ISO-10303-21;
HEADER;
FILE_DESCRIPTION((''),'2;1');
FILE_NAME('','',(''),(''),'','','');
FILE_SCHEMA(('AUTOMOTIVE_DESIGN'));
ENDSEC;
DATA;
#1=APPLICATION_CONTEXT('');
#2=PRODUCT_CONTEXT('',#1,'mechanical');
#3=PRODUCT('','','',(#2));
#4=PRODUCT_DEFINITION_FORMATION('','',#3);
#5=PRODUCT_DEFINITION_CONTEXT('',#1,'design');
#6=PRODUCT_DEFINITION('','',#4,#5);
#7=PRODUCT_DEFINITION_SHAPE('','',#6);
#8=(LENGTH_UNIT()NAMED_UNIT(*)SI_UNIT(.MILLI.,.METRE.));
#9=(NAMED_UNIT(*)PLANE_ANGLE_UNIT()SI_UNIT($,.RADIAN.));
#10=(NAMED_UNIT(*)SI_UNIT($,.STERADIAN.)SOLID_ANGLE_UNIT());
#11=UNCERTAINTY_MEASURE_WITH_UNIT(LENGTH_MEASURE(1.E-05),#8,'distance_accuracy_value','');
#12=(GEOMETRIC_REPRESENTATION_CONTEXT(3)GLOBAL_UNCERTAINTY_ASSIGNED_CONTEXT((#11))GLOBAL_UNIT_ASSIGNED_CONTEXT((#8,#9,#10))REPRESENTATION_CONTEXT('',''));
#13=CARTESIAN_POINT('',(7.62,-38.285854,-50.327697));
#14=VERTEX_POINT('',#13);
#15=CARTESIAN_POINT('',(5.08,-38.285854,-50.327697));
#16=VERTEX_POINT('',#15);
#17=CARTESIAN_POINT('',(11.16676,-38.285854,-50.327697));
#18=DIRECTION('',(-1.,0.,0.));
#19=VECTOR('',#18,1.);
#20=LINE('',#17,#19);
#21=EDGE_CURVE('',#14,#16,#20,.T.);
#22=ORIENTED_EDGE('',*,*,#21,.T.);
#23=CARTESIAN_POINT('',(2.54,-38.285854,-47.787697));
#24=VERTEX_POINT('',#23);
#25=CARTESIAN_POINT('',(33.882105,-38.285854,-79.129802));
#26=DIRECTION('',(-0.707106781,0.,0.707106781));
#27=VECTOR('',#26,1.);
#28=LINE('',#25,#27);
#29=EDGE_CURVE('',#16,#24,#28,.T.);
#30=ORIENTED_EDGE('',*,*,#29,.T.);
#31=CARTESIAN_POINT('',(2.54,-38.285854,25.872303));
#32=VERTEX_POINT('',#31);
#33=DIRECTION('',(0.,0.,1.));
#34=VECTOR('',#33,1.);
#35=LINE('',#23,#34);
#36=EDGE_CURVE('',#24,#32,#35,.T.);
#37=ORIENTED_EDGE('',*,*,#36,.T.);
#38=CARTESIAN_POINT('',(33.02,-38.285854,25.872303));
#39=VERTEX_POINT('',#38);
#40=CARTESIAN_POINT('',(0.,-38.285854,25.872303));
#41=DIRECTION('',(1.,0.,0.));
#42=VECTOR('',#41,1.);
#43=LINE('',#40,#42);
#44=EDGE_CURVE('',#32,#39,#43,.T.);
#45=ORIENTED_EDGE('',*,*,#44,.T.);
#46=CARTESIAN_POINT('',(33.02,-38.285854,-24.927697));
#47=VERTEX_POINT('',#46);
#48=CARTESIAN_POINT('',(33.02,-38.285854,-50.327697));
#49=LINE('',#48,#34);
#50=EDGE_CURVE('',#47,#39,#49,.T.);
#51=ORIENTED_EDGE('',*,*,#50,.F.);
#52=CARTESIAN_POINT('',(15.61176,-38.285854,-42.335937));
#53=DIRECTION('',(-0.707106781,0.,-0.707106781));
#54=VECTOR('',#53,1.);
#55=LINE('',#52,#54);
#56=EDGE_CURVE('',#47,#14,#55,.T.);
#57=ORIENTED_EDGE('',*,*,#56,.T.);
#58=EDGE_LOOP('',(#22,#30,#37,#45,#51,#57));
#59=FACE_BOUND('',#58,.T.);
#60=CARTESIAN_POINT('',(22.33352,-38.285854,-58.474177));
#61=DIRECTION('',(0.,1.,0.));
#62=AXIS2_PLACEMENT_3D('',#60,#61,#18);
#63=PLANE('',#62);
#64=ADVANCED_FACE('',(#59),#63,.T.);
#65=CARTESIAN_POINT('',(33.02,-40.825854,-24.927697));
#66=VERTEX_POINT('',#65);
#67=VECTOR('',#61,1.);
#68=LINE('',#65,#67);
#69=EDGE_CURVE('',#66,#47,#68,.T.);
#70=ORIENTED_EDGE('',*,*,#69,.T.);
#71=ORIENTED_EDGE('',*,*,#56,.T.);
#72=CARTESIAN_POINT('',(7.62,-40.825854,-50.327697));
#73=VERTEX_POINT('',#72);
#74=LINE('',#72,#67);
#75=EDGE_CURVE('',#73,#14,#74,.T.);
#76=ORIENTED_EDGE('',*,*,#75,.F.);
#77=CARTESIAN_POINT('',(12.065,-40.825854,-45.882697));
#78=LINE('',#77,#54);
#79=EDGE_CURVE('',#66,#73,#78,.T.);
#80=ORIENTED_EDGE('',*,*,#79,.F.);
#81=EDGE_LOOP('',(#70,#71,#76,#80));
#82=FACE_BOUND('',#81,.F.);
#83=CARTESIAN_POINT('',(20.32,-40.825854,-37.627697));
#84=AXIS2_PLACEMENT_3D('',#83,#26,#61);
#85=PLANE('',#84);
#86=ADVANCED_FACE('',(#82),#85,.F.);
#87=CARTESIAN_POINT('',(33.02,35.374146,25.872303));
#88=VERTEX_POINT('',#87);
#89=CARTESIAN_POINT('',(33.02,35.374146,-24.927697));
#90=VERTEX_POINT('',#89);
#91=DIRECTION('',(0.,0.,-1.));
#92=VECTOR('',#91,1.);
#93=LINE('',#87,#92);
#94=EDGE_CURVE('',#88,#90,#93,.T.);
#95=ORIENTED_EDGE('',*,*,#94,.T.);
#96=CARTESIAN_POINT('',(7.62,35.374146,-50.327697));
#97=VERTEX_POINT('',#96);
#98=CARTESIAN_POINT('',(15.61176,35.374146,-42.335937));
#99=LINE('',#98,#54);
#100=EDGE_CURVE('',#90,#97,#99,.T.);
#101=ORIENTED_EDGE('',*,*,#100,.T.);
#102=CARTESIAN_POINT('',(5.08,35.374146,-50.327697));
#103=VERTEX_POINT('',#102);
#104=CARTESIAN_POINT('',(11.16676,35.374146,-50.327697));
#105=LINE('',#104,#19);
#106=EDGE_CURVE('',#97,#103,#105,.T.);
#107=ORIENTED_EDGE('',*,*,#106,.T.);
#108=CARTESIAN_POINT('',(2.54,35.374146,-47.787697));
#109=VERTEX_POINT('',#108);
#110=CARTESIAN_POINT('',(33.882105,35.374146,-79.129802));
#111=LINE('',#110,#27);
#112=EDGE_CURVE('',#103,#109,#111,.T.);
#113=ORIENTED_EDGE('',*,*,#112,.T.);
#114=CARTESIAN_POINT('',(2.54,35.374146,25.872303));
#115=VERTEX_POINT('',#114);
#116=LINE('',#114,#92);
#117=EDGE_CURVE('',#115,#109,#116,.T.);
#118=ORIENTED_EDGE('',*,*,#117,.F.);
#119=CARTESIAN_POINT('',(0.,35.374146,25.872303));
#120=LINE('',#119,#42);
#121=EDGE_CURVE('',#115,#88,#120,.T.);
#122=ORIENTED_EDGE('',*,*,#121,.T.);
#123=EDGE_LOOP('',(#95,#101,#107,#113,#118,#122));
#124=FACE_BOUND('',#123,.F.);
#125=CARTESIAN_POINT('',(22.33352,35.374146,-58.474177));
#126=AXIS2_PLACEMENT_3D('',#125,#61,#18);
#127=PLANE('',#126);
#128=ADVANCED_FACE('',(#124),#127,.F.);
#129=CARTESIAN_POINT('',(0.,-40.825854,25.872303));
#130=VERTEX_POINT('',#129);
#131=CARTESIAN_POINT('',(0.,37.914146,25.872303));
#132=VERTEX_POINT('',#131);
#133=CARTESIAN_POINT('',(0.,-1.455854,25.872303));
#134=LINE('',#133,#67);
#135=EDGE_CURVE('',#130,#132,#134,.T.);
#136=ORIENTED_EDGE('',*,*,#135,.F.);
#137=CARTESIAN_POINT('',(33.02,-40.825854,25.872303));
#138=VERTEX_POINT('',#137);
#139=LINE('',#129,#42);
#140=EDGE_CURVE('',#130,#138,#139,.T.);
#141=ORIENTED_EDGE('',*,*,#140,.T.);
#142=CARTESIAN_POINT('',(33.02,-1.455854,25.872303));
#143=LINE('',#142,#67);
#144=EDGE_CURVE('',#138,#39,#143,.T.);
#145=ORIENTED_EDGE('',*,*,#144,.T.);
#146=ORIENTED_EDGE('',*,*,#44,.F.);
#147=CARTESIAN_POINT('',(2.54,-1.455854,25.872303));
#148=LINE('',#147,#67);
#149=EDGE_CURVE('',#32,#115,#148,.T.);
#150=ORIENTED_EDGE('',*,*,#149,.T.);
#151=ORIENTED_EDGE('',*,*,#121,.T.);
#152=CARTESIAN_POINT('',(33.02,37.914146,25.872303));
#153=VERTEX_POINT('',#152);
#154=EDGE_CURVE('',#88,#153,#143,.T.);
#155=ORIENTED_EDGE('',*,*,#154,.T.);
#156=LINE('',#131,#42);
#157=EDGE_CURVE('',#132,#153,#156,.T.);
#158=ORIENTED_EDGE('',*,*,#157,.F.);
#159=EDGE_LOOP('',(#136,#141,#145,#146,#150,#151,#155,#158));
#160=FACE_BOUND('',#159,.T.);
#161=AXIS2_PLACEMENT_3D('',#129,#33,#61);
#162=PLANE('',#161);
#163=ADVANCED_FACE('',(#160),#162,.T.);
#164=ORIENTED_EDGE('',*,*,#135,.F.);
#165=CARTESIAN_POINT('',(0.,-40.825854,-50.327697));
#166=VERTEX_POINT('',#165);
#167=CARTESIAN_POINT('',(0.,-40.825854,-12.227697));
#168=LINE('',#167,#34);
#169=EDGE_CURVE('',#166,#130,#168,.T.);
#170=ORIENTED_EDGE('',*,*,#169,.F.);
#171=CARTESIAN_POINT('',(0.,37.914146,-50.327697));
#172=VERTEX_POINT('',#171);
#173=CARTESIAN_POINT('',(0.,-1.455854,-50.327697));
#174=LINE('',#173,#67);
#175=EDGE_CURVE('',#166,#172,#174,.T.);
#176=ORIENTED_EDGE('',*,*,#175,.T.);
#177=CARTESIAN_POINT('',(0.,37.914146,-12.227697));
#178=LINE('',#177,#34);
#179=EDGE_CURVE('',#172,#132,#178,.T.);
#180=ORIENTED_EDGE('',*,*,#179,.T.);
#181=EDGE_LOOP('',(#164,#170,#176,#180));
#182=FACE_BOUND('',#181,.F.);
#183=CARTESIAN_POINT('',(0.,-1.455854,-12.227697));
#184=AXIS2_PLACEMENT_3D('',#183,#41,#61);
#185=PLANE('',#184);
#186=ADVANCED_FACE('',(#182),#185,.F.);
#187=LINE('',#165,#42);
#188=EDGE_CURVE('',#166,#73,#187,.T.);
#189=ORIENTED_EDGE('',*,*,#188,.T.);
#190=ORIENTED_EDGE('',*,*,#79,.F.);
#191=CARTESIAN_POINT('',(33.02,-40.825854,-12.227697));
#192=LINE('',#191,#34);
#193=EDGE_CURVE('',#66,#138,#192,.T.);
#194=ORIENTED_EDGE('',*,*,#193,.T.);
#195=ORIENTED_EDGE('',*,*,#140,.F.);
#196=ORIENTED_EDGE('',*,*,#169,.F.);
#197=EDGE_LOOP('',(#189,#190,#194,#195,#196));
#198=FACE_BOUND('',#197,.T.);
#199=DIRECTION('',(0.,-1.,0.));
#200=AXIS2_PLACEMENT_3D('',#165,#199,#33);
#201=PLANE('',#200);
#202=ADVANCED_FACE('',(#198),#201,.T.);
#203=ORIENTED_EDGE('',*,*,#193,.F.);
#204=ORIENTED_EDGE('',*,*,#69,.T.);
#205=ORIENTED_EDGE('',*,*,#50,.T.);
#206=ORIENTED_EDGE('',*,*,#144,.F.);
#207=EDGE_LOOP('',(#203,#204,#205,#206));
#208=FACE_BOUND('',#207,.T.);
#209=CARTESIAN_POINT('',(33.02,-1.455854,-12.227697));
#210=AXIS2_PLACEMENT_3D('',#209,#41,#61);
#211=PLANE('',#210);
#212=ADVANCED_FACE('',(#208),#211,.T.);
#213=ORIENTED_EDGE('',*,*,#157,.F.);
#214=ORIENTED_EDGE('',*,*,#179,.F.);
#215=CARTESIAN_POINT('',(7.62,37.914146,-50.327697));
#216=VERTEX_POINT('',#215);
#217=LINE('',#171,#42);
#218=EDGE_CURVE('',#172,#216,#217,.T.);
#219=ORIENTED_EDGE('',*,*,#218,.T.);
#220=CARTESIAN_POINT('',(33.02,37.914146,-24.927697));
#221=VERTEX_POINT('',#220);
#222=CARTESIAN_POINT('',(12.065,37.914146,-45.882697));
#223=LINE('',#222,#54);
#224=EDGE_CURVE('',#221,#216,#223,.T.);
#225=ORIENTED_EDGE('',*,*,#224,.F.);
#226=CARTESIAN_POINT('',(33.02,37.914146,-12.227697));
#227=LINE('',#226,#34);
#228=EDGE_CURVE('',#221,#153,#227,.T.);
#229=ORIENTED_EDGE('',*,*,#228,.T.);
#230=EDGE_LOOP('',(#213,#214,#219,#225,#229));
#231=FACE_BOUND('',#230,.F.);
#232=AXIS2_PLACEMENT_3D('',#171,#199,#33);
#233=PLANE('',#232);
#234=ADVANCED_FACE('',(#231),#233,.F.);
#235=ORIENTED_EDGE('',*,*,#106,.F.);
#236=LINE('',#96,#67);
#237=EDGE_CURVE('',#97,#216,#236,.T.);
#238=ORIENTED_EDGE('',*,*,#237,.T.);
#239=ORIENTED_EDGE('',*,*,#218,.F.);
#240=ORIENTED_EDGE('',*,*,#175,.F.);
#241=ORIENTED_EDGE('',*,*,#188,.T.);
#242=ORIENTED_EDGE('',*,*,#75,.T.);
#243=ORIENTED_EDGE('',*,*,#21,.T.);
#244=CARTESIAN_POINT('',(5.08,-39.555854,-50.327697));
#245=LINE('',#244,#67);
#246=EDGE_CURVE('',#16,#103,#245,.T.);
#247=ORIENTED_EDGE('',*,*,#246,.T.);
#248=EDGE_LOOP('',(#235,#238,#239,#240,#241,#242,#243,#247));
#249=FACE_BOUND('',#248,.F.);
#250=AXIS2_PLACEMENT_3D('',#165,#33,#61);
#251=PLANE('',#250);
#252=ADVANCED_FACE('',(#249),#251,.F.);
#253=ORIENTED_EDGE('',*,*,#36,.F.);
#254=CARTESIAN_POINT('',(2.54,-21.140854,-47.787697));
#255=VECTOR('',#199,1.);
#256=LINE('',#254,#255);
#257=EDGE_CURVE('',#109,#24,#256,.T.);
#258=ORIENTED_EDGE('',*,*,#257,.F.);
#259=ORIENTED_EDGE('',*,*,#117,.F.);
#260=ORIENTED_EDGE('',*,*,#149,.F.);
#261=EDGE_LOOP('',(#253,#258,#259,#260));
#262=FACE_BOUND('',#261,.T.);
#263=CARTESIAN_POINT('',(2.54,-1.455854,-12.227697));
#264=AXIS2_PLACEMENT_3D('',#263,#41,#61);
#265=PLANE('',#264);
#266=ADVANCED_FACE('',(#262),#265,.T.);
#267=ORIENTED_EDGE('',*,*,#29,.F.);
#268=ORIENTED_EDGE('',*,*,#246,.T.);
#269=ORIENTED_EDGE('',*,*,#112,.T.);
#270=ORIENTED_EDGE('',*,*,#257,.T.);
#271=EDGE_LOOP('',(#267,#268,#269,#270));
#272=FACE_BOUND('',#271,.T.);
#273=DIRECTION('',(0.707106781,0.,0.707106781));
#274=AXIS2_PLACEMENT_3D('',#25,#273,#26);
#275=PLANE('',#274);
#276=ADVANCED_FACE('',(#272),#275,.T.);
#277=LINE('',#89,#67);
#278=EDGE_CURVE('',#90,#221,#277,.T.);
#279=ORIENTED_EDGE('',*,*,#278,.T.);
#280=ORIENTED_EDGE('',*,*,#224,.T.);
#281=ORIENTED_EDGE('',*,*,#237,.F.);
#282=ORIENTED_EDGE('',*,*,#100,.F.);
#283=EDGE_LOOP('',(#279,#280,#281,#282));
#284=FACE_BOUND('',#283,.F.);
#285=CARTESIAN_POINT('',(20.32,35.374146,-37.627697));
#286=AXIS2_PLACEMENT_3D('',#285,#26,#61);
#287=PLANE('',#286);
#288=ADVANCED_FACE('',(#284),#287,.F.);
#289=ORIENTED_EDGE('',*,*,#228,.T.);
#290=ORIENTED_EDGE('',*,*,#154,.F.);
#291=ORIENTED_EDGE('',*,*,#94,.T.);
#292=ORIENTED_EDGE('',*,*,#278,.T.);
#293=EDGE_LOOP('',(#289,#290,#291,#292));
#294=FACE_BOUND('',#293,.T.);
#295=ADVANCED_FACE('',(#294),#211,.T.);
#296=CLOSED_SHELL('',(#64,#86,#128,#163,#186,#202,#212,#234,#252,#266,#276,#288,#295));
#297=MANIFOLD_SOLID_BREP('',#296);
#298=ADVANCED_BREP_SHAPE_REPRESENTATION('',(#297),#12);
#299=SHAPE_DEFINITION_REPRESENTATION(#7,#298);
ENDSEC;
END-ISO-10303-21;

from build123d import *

# Parameters (mm, degrees)
F0_W        = 78.74
F0_H        = 76.2
F1_DEPTH    = 33.02
F2_T        = -2.54
F3_T4_DEPTH = 73.66
F4_SIZE     = 25.4


# Not quite as in the source:
# - a fillet or chamfer that OpenCascade refuses, or shapes differently, is made with other operations: its cross-section is extruded or revolved along the edge and cut away or added


with BuildPart() as f1:
    # F0 (on Right) → F1 (new body)
    with BuildSketch(Plane.YZ):
        with Locations((-1.4558544075, -12.2276971856)):
            Rectangle(F0_W, F0_H)
    extrude(amount=F1_DEPTH)

    # F2
    f2_openings = [f1.faces().sort_by_distance(p)[0] for p in [
        (33.02, -1.455854, -12.227697),
        (16.51, -1.455854, 25.872303),
    ]]
    offset(amount=F2_T, openings=f2_openings)

    # F3: chamfer of 30.48 on 1 edges, made by hand


with BuildPart() as f3_tool2:
    # F3_s3 → F3_t4 (new body)
    with BuildSketch(Plane.XZ.offset(38.2858544075)):
        with BuildLine():
            Line((33.8821045876, -79.1298017732), (1.6778954124, -46.925592598))
            Line((1.6778954124, -46.925592598), (1.6778954124, -46.315992598))
            ThreePointArc((1.6778954124, -46.315992598), (17.3489477062, -47.1780971856), (33.02, -47.1780971856))
            Line((33.02, -47.1780971856), (33.6296, -47.7876971856))
            ThreePointArc((33.6296, -47.7876971856), (33.6296, -63.4587494794), (34.4917045876, -79.1298017732))
            Line((34.4917045876, -79.1298017732), (33.8821045876, -79.1298017732))
        make_face()
    extrude(amount=-F3_T4_DEPTH)

    split(bisect_by=Plane.YZ.offset(2.54), keep=Keep.TOP)


with BuildPart() as f1_1:
    add(f1.part)

    # F3_t1: cut F3_tool2
    add(f3_tool2.part, mode=Mode.SUBTRACT)

    # F4
    f4_edges = [f1_1.edges().sort_by_distance(p)[0] for p in [
        (33.02, -39.555854, -50.327697),
        (33.02, 36.644146, -50.327697),
    ]]
    chamfer(f4_edges, length=F4_SIZE)


solid = f1_1.part
